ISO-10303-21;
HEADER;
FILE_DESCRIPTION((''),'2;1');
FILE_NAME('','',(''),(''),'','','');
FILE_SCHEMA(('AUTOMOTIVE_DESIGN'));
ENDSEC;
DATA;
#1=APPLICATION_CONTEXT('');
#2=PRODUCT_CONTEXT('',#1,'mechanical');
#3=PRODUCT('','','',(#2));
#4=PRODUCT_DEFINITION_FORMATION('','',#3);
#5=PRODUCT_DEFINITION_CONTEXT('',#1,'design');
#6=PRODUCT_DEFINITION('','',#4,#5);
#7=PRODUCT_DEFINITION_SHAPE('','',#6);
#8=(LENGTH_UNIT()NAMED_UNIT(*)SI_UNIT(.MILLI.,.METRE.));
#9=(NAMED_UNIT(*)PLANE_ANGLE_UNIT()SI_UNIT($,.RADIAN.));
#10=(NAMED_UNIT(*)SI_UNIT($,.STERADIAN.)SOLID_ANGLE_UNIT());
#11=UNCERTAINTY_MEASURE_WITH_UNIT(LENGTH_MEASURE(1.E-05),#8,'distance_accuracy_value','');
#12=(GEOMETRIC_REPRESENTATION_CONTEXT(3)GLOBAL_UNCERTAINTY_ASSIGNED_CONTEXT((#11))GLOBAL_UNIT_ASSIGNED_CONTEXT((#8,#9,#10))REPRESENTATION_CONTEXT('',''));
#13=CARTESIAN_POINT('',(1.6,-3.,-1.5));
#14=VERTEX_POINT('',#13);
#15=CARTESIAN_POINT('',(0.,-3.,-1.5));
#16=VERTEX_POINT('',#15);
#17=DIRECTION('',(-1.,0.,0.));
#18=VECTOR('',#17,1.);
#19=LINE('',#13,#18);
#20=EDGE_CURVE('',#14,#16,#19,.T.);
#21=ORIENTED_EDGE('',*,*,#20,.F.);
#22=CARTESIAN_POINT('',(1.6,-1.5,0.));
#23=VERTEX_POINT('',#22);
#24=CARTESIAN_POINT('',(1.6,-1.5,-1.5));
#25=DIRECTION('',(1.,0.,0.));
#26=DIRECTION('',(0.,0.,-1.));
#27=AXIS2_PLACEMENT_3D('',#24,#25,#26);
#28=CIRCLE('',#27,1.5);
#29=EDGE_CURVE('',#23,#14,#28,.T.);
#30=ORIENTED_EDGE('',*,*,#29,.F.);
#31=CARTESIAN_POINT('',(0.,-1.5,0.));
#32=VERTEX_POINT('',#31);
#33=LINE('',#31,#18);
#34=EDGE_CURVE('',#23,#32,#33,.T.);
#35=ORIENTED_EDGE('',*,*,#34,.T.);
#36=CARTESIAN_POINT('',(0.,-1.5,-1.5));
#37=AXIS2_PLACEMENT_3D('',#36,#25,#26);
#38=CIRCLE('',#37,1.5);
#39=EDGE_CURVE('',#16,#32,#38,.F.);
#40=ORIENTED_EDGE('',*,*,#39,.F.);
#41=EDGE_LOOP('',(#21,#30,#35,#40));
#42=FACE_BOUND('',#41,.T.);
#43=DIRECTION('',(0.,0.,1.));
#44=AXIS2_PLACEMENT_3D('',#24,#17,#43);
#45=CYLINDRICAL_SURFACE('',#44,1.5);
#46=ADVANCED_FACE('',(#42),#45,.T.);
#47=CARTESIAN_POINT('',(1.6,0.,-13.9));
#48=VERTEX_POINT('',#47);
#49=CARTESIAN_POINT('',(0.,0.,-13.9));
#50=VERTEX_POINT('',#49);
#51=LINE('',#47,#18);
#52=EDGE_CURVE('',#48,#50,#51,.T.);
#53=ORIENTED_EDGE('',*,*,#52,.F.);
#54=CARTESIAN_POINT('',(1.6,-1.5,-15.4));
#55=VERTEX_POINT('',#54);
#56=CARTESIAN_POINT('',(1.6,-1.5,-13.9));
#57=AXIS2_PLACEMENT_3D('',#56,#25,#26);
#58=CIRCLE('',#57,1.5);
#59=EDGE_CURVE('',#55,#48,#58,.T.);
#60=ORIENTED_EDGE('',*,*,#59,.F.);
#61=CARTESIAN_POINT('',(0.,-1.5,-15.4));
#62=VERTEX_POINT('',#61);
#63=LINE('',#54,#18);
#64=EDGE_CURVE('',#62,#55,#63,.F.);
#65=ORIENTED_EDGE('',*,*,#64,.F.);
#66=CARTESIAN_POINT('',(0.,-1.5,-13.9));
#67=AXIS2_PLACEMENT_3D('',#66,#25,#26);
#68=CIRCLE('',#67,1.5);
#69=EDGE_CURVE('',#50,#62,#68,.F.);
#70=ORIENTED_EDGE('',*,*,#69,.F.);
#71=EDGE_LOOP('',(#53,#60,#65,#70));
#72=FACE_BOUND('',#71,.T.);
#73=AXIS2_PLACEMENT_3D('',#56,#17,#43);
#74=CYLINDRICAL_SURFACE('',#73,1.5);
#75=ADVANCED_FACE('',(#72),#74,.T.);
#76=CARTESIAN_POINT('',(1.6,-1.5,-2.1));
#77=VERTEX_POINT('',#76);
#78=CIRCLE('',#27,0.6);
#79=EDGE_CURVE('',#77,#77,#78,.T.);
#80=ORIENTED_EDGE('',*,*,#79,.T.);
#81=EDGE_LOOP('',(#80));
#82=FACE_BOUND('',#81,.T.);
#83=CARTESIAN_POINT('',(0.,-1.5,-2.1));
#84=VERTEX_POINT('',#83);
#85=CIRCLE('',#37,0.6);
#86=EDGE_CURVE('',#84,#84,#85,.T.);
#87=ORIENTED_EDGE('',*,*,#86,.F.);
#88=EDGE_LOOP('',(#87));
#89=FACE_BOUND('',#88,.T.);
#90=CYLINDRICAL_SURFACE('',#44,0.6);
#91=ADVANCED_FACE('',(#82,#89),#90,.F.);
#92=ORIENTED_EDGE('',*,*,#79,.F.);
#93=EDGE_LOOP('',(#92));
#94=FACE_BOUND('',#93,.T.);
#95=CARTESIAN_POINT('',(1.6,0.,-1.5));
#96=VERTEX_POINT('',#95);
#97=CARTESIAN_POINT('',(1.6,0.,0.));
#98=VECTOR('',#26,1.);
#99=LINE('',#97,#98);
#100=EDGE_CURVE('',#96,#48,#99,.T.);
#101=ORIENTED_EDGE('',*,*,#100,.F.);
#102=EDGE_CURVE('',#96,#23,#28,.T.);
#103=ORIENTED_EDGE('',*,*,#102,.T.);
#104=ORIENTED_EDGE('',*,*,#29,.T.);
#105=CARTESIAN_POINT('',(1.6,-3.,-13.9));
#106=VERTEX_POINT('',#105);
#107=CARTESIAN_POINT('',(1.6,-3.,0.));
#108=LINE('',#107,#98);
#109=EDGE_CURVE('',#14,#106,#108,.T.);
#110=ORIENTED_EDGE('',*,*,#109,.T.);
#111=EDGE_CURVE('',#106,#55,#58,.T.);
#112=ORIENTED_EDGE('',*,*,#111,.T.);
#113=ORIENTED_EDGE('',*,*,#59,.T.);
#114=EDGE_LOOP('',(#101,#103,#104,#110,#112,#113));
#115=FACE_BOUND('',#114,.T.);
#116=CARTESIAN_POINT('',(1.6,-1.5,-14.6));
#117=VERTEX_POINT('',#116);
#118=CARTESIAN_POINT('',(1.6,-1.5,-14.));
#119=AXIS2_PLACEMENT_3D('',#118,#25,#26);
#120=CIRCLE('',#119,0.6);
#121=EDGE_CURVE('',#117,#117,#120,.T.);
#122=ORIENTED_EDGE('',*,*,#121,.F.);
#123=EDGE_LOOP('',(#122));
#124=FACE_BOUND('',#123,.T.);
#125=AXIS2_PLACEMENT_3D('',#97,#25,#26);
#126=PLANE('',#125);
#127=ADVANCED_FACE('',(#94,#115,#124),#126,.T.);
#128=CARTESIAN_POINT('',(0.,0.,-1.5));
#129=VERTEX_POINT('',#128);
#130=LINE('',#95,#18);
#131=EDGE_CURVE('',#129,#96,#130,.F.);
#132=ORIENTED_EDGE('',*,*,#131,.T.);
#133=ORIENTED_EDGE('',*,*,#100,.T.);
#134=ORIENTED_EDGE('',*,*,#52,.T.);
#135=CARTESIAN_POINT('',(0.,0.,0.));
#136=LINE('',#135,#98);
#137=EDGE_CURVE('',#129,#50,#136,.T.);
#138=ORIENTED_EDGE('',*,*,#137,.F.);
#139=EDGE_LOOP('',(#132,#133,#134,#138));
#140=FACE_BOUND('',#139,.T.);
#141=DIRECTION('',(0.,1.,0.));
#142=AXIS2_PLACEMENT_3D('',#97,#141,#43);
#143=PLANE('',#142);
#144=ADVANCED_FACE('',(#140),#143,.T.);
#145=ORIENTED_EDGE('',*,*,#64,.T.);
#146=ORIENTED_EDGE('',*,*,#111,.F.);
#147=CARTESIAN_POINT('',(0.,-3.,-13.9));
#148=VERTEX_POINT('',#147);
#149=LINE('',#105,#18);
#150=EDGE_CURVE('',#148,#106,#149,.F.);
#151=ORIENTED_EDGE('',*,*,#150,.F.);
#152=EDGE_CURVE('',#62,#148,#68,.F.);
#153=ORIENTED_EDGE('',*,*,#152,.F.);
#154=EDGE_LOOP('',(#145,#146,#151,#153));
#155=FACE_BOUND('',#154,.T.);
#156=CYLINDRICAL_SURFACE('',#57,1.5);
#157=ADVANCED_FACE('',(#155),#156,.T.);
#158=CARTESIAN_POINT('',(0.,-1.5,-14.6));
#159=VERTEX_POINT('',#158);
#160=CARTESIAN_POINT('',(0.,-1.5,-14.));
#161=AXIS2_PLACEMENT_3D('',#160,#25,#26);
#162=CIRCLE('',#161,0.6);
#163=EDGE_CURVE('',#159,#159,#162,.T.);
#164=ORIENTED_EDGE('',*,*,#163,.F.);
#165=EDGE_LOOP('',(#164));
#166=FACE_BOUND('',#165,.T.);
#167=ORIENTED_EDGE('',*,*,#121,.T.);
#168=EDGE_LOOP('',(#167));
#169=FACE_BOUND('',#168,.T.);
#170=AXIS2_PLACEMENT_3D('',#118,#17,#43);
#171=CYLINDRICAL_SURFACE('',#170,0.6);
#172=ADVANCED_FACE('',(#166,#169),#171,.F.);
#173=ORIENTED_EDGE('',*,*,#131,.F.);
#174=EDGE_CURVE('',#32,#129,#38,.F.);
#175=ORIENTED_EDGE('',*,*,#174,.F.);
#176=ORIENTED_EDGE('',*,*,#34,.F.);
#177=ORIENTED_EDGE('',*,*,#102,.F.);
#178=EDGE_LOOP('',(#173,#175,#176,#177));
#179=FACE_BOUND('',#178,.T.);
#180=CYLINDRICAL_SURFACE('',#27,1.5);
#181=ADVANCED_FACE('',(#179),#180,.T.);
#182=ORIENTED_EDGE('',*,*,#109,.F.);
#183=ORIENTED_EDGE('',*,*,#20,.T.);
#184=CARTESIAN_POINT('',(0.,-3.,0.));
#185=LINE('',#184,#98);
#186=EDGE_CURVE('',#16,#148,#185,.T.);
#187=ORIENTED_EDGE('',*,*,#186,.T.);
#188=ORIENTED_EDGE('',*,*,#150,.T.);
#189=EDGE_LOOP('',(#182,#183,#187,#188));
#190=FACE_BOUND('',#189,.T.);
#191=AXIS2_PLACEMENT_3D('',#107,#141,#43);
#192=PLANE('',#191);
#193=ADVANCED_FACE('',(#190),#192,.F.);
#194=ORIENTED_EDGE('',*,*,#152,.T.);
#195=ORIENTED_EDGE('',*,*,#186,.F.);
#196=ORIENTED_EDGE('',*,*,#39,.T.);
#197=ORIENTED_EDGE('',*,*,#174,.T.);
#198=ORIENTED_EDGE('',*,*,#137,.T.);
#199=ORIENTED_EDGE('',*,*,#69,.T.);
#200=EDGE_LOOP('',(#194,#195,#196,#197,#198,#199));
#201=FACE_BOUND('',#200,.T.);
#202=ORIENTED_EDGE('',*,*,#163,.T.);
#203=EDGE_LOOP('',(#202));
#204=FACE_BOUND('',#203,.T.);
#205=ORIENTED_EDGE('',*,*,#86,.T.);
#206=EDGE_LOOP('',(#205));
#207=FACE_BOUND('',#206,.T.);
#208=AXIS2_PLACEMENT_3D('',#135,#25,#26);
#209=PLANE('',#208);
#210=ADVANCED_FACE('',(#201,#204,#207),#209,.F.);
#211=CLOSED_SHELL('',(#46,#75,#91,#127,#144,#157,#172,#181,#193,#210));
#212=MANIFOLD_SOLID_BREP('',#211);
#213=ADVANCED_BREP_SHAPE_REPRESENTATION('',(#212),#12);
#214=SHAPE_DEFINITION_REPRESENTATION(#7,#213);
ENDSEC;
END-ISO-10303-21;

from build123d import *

# Parameters (mm, degrees)
SKETCH_1_W      = 15.4
SKETCH_1_H      = 3
SKETCH_1_R      = 0.6
EXTRUDE_1_DEPTH = 1.6
FILLET_1_R      = 1.5


with BuildPart() as part:
    # 草图1 → 凸台-拉伸1 (new body)
    with BuildSketch(Plane(origin=(0, 0, 0), x_dir=(0, 0, -1), z_dir=(1, 0, 0))):
        with Locations((7.7, -1.5)):
            Rectangle(SKETCH_1_W, SKETCH_1_H)
        with Locations((1.5, -1.5)):
            Circle(SKETCH_1_R, mode=Mode.SUBTRACT)
        with Locations((14, -1.5)):
            Circle(SKETCH_1_R, mode=Mode.SUBTRACT)
    extrude(amount=EXTRUDE_1_DEPTH)

    # 圆角1
    fillet_1_edges = [part.edges().sort_by_distance(p)[0] for p in [
        (0.8, -3, 0),
        (0.8, 0, 0),
        (0.8, -3, -15.4),
        (0.8, 0, -15.4),
    ]]
    fillet(fillet_1_edges, radius=FILLET_1_R - 0.0001)  # a hair under: the kernel refuses the full size


solid = part.part
